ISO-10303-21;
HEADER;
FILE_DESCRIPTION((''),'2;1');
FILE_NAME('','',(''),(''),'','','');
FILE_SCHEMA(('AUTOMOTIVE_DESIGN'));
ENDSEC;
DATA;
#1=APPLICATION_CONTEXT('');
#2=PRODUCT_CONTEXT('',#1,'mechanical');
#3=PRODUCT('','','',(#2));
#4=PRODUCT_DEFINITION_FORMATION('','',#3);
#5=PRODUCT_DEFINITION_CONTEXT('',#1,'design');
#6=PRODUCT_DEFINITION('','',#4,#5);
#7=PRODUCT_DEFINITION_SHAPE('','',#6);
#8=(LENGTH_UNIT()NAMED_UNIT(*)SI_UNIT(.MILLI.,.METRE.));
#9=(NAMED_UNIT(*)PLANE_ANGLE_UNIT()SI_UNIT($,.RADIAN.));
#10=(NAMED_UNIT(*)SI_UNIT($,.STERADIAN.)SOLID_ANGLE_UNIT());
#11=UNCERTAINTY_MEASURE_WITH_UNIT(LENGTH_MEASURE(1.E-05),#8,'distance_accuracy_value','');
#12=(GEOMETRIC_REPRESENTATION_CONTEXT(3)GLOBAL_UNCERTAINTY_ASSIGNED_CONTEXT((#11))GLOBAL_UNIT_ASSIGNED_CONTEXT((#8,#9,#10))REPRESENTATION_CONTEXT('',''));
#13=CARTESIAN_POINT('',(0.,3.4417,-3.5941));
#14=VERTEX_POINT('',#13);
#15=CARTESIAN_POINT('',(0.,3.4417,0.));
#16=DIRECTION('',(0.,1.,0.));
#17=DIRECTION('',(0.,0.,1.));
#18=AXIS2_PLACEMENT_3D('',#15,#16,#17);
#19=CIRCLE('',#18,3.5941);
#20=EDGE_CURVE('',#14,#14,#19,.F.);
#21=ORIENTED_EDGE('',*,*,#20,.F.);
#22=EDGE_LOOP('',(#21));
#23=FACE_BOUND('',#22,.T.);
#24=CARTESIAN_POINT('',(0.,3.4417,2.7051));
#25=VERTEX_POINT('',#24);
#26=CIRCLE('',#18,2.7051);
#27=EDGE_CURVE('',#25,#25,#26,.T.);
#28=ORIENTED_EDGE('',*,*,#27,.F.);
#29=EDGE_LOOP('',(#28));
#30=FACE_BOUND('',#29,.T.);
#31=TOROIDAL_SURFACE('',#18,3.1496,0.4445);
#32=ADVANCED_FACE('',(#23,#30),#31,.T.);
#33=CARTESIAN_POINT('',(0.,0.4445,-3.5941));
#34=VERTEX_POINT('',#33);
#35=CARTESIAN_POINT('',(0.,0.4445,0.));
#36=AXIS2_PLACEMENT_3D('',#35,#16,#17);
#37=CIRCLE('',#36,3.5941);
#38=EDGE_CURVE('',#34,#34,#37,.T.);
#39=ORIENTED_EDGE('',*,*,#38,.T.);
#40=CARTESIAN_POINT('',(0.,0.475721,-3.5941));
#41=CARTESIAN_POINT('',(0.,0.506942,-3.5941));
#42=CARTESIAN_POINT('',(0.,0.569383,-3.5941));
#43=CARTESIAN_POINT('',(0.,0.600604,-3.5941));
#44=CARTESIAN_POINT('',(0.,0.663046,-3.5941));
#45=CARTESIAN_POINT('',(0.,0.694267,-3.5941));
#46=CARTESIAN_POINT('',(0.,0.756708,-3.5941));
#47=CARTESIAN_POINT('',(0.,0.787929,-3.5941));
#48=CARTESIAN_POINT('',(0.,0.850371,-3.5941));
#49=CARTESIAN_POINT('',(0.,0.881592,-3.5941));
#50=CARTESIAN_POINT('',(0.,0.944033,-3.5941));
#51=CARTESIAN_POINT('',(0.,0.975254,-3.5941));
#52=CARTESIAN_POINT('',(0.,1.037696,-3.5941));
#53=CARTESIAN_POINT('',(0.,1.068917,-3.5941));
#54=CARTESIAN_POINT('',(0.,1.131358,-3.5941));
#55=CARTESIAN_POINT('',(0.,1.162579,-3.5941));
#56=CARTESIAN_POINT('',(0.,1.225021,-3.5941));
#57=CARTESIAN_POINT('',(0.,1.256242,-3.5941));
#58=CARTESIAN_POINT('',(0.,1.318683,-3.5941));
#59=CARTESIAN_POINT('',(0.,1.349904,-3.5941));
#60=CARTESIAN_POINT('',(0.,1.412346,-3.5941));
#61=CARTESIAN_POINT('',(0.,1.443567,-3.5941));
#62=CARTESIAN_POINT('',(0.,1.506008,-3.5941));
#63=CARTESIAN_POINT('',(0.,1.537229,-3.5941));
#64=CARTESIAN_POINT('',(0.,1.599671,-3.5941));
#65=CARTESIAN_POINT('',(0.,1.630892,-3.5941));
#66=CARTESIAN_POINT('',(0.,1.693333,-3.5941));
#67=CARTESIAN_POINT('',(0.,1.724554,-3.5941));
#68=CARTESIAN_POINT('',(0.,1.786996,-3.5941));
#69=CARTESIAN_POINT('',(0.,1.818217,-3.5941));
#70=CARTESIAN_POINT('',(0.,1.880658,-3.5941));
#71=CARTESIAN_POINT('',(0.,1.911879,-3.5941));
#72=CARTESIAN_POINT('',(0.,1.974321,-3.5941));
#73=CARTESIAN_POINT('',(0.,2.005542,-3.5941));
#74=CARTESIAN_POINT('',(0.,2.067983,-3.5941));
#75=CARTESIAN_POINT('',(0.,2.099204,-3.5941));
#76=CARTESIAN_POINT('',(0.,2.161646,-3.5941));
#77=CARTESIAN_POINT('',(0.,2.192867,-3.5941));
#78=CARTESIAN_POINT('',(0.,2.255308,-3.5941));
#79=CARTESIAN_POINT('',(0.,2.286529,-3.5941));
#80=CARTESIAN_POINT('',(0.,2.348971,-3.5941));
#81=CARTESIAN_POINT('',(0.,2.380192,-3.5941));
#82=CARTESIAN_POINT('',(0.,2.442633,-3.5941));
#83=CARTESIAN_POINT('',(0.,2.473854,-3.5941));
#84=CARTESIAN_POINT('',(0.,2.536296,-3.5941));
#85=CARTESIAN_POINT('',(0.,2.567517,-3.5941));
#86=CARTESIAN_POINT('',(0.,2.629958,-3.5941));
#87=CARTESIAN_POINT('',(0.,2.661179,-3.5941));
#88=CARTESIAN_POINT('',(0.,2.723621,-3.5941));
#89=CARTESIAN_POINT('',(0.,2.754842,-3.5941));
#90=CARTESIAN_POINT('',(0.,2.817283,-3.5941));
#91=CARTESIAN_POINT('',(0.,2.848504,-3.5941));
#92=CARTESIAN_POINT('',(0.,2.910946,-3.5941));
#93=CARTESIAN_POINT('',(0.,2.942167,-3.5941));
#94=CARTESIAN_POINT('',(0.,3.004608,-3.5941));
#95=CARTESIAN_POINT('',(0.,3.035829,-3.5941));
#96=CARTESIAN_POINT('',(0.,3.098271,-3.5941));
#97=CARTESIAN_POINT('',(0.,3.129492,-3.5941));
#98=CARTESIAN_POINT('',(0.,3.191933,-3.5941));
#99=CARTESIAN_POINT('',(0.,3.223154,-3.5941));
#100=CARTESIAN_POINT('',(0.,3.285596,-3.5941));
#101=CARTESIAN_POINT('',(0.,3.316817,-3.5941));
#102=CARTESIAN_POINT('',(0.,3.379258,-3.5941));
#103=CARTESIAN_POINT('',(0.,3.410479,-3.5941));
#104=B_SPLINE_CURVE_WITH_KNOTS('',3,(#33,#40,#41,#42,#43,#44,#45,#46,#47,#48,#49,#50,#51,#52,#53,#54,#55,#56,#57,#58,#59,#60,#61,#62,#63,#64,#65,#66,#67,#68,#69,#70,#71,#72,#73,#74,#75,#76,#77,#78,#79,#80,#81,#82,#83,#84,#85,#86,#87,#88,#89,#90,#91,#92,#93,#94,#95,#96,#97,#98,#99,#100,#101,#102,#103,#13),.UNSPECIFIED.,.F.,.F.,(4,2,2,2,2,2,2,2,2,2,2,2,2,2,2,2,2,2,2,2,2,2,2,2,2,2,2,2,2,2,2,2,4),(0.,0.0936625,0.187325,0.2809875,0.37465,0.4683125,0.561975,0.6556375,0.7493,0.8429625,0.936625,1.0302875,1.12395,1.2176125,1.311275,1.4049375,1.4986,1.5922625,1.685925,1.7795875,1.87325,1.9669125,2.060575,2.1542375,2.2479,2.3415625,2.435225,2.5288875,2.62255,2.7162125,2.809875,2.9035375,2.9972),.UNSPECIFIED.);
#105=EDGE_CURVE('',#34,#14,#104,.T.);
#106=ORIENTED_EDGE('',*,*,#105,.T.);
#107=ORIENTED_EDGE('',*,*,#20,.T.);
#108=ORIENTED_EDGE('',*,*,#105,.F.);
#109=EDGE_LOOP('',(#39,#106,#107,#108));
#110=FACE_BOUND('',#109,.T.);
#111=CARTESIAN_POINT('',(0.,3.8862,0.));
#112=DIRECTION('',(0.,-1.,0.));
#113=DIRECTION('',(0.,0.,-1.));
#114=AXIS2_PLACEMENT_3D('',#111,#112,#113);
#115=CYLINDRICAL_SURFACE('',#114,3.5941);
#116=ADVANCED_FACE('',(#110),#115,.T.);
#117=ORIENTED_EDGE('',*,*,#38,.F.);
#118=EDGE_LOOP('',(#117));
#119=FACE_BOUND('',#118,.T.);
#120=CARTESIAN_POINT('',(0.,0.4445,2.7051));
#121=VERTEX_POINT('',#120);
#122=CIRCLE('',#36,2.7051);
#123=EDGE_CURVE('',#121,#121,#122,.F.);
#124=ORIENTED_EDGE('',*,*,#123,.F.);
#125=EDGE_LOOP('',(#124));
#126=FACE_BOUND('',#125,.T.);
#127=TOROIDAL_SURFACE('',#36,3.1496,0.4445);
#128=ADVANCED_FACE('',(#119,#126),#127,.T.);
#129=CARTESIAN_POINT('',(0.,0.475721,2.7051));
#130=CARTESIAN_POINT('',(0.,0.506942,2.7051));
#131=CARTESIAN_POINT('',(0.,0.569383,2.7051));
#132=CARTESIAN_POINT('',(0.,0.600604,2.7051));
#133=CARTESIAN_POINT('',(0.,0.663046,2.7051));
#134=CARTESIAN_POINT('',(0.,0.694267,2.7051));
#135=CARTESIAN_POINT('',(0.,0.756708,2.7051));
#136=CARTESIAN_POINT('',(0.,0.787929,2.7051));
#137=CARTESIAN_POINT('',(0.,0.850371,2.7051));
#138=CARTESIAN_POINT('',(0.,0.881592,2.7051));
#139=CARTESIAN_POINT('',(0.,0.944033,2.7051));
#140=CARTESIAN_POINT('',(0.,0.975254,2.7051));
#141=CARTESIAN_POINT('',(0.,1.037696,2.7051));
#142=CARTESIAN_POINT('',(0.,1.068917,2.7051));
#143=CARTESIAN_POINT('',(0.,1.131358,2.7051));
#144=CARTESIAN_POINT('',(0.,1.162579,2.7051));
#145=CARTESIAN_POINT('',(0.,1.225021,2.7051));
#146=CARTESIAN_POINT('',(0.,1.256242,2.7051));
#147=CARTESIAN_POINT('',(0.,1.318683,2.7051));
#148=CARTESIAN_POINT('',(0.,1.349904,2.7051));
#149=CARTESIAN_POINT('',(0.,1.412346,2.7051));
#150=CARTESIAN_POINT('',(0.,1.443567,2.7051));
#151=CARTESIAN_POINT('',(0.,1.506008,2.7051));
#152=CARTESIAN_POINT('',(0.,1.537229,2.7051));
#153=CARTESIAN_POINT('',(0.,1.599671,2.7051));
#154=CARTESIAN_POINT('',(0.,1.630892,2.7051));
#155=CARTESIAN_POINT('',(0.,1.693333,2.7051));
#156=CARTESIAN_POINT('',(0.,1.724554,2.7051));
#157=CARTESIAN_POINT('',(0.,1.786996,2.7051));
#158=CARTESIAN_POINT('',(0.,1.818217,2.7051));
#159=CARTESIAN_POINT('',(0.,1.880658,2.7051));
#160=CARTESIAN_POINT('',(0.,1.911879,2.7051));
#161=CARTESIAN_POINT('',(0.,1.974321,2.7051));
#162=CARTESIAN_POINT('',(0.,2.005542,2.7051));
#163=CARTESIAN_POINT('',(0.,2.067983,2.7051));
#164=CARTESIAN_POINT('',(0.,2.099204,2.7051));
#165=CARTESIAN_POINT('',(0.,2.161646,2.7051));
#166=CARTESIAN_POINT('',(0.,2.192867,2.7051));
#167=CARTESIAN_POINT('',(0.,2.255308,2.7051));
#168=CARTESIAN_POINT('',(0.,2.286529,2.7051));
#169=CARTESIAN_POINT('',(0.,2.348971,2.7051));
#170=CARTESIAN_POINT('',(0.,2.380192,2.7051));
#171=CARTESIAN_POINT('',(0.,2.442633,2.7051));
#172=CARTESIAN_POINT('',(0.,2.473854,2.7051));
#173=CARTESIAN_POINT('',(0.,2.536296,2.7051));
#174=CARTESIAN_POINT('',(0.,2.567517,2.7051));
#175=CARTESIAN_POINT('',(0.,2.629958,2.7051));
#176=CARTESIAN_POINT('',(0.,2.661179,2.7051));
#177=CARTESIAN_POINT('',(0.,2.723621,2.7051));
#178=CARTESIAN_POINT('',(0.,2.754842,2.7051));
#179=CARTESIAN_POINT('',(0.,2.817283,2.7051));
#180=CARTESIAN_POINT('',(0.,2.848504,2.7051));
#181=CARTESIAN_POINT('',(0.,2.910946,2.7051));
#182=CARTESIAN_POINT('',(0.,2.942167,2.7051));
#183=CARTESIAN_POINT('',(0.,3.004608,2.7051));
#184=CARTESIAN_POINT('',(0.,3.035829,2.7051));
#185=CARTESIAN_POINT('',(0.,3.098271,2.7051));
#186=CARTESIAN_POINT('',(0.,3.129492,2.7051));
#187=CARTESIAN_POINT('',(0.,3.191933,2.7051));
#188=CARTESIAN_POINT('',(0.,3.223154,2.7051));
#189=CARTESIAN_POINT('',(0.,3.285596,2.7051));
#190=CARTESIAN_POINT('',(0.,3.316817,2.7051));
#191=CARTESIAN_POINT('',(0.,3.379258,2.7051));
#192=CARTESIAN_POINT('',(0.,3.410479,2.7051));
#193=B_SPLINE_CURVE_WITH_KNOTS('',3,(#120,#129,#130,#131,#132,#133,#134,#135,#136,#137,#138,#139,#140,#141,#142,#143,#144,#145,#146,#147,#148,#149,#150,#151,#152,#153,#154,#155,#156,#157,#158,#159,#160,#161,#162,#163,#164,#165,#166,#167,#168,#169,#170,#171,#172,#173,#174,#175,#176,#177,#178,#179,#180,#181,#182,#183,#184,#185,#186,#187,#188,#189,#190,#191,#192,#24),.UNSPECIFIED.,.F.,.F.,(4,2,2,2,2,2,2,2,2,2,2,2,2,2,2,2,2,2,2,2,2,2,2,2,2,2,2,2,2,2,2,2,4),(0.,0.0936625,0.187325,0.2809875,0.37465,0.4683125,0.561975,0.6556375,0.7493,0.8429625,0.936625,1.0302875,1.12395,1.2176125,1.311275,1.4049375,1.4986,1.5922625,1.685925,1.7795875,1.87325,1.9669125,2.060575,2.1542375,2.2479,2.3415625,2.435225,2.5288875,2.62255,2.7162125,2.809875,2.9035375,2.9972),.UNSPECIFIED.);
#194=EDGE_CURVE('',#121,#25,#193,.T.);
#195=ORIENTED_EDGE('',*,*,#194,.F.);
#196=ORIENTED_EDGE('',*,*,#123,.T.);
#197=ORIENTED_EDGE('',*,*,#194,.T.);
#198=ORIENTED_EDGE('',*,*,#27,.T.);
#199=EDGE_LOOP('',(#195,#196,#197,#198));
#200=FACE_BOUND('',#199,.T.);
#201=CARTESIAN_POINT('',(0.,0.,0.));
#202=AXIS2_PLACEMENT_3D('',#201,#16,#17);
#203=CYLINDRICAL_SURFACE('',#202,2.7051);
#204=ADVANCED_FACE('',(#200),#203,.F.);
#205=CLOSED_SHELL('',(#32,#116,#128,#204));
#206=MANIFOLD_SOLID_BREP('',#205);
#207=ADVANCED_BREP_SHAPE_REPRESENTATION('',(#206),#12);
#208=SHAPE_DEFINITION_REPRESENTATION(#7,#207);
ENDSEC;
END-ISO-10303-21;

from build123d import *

# Parameters (mm, degrees)
SKETCH1_R           = 3.5941
BOSS_EXTRUDE1_DEPTH = 3.8862
SKETCH2_R           = 2.7051
CUT_EXTRUDE1_DEPTH  = 3.8862
FILLET1_R           = 0.4445
FILLET2_R           = 0.4445


with BuildPart() as part:
    # Sketch1 → Boss-Extrude1 (new body)
    with BuildSketch(Plane(origin=(0, 0, 0), x_dir=(1, 0, 0), z_dir=(0, 1, 0))):
        with Locations(Location((0, 0, 0), (0, 0, 90))):
            Circle(SKETCH1_R)
    extrude(amount=BOSS_EXTRUDE1_DEPTH)

    # Sketch2 → Cut-Extrude1 (cut)
    with BuildSketch(Plane(origin=(0, 3.8862, 0), x_dir=(1, 0, 0), z_dir=(0, 1, 0))):
        with Locations(Location((0, 0, 0), (0, 0, 270))):
            Circle(SKETCH2_R)
    extrude(amount=-CUT_EXTRUDE1_DEPTH, mode=Mode.SUBTRACT)

    # Fillet1
    fillet1_edges = [part.edges().sort_by_distance(p)[0] for p in [
        (0, 3.8862, 3.5941),
        (0, 3.8862, -2.7051),
    ]]
    fillet(fillet1_edges, radius=FILLET1_R - 0.0001)  # a hair under: the kernel refuses the full size

    # Fillet2
    fillet2_edges = [part.edges().sort_by_distance(p)[0] for p in [
        (0, 0, 3.5941),
        (0, 0, -2.7051),
    ]]
    fillet(fillet2_edges, radius=FILLET2_R - 0.0001)  # a hair under: the kernel refuses the full size


solid = part.part
